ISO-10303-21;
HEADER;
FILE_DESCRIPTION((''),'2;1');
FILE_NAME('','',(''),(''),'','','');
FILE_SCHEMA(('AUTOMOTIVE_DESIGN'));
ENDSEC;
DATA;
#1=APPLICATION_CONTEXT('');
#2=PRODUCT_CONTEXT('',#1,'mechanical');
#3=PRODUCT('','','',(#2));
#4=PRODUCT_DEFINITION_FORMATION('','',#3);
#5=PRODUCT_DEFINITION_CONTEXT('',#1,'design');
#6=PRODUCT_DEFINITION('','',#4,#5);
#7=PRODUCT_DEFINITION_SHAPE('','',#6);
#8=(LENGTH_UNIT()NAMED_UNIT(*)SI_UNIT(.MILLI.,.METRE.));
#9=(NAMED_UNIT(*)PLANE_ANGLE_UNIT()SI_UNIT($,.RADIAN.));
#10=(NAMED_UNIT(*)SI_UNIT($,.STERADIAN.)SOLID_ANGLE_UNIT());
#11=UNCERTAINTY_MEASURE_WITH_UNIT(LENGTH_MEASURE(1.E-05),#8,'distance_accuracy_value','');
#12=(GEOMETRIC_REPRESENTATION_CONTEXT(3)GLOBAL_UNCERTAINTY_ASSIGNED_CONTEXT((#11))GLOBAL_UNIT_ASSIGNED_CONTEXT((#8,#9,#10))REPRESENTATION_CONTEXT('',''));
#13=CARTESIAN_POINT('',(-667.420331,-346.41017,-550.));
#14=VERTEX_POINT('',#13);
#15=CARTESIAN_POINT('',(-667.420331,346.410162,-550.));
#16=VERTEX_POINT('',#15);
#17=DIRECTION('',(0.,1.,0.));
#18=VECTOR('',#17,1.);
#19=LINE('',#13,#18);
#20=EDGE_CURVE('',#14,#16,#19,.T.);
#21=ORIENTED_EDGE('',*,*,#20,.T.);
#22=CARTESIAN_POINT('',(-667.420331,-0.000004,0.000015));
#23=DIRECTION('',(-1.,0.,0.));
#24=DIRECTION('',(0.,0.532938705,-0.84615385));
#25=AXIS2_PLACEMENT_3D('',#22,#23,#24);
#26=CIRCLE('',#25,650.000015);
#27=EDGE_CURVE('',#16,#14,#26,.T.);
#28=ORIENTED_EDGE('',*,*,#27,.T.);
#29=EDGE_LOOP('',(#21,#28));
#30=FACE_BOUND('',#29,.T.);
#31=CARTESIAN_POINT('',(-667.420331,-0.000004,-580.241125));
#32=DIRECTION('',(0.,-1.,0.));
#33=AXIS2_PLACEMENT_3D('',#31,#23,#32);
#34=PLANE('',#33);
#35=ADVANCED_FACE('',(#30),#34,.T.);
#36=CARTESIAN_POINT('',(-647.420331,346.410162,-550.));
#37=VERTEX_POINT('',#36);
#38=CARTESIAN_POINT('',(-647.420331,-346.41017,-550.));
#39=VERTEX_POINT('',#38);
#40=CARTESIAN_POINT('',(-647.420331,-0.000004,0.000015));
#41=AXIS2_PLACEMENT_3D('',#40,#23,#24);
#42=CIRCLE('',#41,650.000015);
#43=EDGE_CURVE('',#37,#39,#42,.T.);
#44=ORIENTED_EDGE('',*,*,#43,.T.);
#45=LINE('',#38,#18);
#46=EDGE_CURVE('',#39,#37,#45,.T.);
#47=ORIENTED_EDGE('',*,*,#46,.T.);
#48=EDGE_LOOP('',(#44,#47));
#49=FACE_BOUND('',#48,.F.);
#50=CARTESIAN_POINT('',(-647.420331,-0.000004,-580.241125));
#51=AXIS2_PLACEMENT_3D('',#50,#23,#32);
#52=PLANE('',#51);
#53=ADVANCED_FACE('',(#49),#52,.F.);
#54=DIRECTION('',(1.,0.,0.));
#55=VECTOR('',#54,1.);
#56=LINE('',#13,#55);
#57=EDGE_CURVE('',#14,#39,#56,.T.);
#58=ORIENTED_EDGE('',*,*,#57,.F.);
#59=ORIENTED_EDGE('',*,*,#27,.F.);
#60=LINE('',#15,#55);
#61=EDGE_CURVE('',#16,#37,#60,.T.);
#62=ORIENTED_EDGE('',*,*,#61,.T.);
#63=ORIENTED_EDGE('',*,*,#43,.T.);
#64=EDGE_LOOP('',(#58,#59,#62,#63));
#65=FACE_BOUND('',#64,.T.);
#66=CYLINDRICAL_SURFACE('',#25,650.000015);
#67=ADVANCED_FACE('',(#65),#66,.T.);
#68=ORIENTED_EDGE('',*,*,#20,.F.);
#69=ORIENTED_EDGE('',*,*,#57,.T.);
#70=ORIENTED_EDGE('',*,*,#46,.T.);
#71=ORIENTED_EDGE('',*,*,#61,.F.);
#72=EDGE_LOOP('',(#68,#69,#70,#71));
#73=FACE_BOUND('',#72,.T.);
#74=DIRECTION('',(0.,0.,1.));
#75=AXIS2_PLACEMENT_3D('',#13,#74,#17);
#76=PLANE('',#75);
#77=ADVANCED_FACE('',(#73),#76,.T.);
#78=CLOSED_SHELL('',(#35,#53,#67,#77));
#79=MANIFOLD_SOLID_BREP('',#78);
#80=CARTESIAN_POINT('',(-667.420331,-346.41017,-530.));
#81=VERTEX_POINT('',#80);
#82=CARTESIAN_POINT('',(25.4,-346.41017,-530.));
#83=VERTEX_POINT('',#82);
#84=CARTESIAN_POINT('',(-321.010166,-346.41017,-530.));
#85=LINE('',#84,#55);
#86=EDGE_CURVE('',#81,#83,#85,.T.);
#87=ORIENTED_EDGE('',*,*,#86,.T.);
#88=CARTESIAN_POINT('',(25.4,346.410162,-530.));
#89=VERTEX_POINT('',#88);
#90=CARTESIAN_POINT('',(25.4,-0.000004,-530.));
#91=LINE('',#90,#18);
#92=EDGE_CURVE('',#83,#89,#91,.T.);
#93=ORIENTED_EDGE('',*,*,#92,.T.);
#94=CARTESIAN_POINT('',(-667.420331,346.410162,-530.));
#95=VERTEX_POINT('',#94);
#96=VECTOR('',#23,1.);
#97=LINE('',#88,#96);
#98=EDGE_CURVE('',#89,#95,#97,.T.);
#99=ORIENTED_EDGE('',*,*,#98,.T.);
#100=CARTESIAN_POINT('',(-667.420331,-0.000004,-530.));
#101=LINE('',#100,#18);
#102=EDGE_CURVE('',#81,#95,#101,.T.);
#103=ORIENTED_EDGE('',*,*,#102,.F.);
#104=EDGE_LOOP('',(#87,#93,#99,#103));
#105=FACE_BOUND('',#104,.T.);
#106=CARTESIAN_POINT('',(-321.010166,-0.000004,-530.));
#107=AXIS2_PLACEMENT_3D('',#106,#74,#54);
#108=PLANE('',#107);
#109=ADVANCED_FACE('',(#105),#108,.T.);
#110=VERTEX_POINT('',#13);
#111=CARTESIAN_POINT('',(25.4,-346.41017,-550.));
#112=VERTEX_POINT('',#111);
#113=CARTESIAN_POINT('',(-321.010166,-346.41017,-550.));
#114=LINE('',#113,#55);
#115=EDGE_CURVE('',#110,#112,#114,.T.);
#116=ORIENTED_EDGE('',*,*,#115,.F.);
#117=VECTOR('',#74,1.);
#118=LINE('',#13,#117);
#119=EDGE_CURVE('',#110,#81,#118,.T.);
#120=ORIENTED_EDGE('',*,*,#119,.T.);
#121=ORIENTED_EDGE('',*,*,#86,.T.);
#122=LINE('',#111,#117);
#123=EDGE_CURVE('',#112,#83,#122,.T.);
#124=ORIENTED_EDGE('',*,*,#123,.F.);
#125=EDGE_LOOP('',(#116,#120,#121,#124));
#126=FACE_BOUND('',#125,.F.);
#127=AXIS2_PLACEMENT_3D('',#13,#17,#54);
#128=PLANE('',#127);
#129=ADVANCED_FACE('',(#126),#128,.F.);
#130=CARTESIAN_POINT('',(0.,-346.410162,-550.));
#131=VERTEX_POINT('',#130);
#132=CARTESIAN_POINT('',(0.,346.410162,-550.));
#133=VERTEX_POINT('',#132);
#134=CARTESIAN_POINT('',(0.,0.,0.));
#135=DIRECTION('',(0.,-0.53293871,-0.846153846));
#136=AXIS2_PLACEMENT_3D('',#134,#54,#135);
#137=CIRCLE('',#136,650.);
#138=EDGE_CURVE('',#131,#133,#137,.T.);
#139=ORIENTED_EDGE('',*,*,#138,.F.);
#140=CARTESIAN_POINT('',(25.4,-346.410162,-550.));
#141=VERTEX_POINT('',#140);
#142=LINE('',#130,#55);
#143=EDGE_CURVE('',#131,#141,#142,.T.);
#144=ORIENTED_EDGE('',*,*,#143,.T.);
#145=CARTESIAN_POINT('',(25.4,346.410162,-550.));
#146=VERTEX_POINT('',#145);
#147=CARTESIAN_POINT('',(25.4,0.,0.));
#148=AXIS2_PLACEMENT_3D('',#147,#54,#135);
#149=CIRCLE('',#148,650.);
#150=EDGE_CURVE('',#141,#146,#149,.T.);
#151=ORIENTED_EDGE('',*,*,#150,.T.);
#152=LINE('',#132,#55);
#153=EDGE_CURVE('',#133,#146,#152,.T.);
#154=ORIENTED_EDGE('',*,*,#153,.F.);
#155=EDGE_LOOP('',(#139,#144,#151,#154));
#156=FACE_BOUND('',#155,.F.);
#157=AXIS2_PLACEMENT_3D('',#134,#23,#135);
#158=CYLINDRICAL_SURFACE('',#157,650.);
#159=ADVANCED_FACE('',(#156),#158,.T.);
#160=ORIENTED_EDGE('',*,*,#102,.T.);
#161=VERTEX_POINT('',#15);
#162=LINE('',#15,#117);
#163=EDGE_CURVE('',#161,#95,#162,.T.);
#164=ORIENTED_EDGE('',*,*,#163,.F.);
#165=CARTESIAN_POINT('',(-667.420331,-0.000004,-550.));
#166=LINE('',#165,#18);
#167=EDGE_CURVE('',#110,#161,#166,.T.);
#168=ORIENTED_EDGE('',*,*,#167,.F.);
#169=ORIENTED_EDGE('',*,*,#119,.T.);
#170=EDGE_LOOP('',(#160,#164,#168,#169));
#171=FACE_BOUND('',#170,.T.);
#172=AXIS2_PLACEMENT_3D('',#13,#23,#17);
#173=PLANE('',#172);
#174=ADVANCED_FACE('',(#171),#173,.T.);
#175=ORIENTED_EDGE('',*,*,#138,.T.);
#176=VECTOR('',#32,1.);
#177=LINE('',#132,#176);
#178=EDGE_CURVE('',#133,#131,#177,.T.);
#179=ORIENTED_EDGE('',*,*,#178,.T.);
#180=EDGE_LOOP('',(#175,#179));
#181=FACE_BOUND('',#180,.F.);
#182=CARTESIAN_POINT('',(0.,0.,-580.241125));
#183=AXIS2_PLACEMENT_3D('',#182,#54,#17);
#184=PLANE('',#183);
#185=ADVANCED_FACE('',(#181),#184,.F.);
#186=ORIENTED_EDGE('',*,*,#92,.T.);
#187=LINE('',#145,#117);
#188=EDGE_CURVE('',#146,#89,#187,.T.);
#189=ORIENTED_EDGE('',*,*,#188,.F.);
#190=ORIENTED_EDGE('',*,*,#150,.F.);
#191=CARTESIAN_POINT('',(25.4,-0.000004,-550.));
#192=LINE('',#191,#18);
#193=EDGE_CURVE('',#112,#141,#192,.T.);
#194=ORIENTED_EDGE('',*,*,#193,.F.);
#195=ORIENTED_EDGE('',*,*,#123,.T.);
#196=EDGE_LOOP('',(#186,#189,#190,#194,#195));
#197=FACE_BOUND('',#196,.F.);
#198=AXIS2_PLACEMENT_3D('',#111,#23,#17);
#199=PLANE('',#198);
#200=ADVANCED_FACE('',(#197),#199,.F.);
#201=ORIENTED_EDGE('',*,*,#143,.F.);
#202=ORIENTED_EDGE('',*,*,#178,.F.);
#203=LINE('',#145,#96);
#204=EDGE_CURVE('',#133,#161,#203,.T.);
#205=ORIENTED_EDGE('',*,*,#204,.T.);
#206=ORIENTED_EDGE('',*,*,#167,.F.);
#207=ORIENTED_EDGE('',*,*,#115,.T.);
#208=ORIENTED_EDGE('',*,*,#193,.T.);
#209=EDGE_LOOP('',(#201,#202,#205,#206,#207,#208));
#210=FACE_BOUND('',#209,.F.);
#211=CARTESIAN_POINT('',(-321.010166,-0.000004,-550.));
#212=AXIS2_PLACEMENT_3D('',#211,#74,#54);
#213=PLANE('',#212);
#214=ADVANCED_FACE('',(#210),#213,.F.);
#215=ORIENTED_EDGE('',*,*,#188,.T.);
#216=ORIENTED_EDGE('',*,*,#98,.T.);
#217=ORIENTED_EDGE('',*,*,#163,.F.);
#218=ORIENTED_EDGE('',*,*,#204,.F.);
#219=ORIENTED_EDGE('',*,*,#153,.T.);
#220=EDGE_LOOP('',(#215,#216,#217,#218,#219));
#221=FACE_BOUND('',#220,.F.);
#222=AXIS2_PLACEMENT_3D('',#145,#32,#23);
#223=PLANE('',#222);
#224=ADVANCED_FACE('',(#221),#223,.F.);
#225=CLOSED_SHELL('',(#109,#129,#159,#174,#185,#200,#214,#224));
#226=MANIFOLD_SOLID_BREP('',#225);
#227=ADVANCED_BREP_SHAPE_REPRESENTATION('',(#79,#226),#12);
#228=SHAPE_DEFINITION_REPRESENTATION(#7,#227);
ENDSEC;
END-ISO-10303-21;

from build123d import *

# Parameters (mm, degrees)
F1_DEPTH = 25.4
F2_W     = 692.8203314
F2_H     = 692.8203314
F3_DEPTH = 20
F5_DEPTH = 20


# Not quite as in the source:
# - ends of sketch curves that miss each other by under 0.0002 mm in the source are joined


with BuildPart() as f1:
    # F0 (on Right) → F1 (new body)
    with BuildSketch(Plane.YZ):
        with BuildLine():
            Line((346.4101615138, -550), (-346.4101615138, -550))
            ThreePointArc((-346.4101615138, -550), (0, -650), (346.4101615138, -550))
        make_face()
    extrude(amount=F1_DEPTH)

    # F2 (on face) → F3 (join)
    with BuildSketch(Plane.XY.offset(-550)):
        with Locations((-321.0101657, -4.1862e-06)):
            Rectangle(F2_W, F2_H)
        Polygon((0, -346.4101615138), (0, 346.4101615138), (-667.4203314, 346.4101615138), (-667.4203314, -346.4101698862), align=None)
    extrude(amount=F3_DEPTH)


with BuildPart() as f5:
    # F4 (on face) → F5 (new body)
    with BuildSketch(Plane(origin=(-667.4203314, 0, 0), x_dir=(0, -1, 0), z_dir=(-1, 0, 0))):
        with BuildLine():
            Line((346.4101698862, -550), (-346.4101615138, -550))
            ThreePointArc((-346.4101615138, -550), (3.5422e-06, -650), (346.4101698862, -550))
        make_face()
    extrude(amount=-F5_DEPTH)


solid = Compound([f1.part, f5.part])
